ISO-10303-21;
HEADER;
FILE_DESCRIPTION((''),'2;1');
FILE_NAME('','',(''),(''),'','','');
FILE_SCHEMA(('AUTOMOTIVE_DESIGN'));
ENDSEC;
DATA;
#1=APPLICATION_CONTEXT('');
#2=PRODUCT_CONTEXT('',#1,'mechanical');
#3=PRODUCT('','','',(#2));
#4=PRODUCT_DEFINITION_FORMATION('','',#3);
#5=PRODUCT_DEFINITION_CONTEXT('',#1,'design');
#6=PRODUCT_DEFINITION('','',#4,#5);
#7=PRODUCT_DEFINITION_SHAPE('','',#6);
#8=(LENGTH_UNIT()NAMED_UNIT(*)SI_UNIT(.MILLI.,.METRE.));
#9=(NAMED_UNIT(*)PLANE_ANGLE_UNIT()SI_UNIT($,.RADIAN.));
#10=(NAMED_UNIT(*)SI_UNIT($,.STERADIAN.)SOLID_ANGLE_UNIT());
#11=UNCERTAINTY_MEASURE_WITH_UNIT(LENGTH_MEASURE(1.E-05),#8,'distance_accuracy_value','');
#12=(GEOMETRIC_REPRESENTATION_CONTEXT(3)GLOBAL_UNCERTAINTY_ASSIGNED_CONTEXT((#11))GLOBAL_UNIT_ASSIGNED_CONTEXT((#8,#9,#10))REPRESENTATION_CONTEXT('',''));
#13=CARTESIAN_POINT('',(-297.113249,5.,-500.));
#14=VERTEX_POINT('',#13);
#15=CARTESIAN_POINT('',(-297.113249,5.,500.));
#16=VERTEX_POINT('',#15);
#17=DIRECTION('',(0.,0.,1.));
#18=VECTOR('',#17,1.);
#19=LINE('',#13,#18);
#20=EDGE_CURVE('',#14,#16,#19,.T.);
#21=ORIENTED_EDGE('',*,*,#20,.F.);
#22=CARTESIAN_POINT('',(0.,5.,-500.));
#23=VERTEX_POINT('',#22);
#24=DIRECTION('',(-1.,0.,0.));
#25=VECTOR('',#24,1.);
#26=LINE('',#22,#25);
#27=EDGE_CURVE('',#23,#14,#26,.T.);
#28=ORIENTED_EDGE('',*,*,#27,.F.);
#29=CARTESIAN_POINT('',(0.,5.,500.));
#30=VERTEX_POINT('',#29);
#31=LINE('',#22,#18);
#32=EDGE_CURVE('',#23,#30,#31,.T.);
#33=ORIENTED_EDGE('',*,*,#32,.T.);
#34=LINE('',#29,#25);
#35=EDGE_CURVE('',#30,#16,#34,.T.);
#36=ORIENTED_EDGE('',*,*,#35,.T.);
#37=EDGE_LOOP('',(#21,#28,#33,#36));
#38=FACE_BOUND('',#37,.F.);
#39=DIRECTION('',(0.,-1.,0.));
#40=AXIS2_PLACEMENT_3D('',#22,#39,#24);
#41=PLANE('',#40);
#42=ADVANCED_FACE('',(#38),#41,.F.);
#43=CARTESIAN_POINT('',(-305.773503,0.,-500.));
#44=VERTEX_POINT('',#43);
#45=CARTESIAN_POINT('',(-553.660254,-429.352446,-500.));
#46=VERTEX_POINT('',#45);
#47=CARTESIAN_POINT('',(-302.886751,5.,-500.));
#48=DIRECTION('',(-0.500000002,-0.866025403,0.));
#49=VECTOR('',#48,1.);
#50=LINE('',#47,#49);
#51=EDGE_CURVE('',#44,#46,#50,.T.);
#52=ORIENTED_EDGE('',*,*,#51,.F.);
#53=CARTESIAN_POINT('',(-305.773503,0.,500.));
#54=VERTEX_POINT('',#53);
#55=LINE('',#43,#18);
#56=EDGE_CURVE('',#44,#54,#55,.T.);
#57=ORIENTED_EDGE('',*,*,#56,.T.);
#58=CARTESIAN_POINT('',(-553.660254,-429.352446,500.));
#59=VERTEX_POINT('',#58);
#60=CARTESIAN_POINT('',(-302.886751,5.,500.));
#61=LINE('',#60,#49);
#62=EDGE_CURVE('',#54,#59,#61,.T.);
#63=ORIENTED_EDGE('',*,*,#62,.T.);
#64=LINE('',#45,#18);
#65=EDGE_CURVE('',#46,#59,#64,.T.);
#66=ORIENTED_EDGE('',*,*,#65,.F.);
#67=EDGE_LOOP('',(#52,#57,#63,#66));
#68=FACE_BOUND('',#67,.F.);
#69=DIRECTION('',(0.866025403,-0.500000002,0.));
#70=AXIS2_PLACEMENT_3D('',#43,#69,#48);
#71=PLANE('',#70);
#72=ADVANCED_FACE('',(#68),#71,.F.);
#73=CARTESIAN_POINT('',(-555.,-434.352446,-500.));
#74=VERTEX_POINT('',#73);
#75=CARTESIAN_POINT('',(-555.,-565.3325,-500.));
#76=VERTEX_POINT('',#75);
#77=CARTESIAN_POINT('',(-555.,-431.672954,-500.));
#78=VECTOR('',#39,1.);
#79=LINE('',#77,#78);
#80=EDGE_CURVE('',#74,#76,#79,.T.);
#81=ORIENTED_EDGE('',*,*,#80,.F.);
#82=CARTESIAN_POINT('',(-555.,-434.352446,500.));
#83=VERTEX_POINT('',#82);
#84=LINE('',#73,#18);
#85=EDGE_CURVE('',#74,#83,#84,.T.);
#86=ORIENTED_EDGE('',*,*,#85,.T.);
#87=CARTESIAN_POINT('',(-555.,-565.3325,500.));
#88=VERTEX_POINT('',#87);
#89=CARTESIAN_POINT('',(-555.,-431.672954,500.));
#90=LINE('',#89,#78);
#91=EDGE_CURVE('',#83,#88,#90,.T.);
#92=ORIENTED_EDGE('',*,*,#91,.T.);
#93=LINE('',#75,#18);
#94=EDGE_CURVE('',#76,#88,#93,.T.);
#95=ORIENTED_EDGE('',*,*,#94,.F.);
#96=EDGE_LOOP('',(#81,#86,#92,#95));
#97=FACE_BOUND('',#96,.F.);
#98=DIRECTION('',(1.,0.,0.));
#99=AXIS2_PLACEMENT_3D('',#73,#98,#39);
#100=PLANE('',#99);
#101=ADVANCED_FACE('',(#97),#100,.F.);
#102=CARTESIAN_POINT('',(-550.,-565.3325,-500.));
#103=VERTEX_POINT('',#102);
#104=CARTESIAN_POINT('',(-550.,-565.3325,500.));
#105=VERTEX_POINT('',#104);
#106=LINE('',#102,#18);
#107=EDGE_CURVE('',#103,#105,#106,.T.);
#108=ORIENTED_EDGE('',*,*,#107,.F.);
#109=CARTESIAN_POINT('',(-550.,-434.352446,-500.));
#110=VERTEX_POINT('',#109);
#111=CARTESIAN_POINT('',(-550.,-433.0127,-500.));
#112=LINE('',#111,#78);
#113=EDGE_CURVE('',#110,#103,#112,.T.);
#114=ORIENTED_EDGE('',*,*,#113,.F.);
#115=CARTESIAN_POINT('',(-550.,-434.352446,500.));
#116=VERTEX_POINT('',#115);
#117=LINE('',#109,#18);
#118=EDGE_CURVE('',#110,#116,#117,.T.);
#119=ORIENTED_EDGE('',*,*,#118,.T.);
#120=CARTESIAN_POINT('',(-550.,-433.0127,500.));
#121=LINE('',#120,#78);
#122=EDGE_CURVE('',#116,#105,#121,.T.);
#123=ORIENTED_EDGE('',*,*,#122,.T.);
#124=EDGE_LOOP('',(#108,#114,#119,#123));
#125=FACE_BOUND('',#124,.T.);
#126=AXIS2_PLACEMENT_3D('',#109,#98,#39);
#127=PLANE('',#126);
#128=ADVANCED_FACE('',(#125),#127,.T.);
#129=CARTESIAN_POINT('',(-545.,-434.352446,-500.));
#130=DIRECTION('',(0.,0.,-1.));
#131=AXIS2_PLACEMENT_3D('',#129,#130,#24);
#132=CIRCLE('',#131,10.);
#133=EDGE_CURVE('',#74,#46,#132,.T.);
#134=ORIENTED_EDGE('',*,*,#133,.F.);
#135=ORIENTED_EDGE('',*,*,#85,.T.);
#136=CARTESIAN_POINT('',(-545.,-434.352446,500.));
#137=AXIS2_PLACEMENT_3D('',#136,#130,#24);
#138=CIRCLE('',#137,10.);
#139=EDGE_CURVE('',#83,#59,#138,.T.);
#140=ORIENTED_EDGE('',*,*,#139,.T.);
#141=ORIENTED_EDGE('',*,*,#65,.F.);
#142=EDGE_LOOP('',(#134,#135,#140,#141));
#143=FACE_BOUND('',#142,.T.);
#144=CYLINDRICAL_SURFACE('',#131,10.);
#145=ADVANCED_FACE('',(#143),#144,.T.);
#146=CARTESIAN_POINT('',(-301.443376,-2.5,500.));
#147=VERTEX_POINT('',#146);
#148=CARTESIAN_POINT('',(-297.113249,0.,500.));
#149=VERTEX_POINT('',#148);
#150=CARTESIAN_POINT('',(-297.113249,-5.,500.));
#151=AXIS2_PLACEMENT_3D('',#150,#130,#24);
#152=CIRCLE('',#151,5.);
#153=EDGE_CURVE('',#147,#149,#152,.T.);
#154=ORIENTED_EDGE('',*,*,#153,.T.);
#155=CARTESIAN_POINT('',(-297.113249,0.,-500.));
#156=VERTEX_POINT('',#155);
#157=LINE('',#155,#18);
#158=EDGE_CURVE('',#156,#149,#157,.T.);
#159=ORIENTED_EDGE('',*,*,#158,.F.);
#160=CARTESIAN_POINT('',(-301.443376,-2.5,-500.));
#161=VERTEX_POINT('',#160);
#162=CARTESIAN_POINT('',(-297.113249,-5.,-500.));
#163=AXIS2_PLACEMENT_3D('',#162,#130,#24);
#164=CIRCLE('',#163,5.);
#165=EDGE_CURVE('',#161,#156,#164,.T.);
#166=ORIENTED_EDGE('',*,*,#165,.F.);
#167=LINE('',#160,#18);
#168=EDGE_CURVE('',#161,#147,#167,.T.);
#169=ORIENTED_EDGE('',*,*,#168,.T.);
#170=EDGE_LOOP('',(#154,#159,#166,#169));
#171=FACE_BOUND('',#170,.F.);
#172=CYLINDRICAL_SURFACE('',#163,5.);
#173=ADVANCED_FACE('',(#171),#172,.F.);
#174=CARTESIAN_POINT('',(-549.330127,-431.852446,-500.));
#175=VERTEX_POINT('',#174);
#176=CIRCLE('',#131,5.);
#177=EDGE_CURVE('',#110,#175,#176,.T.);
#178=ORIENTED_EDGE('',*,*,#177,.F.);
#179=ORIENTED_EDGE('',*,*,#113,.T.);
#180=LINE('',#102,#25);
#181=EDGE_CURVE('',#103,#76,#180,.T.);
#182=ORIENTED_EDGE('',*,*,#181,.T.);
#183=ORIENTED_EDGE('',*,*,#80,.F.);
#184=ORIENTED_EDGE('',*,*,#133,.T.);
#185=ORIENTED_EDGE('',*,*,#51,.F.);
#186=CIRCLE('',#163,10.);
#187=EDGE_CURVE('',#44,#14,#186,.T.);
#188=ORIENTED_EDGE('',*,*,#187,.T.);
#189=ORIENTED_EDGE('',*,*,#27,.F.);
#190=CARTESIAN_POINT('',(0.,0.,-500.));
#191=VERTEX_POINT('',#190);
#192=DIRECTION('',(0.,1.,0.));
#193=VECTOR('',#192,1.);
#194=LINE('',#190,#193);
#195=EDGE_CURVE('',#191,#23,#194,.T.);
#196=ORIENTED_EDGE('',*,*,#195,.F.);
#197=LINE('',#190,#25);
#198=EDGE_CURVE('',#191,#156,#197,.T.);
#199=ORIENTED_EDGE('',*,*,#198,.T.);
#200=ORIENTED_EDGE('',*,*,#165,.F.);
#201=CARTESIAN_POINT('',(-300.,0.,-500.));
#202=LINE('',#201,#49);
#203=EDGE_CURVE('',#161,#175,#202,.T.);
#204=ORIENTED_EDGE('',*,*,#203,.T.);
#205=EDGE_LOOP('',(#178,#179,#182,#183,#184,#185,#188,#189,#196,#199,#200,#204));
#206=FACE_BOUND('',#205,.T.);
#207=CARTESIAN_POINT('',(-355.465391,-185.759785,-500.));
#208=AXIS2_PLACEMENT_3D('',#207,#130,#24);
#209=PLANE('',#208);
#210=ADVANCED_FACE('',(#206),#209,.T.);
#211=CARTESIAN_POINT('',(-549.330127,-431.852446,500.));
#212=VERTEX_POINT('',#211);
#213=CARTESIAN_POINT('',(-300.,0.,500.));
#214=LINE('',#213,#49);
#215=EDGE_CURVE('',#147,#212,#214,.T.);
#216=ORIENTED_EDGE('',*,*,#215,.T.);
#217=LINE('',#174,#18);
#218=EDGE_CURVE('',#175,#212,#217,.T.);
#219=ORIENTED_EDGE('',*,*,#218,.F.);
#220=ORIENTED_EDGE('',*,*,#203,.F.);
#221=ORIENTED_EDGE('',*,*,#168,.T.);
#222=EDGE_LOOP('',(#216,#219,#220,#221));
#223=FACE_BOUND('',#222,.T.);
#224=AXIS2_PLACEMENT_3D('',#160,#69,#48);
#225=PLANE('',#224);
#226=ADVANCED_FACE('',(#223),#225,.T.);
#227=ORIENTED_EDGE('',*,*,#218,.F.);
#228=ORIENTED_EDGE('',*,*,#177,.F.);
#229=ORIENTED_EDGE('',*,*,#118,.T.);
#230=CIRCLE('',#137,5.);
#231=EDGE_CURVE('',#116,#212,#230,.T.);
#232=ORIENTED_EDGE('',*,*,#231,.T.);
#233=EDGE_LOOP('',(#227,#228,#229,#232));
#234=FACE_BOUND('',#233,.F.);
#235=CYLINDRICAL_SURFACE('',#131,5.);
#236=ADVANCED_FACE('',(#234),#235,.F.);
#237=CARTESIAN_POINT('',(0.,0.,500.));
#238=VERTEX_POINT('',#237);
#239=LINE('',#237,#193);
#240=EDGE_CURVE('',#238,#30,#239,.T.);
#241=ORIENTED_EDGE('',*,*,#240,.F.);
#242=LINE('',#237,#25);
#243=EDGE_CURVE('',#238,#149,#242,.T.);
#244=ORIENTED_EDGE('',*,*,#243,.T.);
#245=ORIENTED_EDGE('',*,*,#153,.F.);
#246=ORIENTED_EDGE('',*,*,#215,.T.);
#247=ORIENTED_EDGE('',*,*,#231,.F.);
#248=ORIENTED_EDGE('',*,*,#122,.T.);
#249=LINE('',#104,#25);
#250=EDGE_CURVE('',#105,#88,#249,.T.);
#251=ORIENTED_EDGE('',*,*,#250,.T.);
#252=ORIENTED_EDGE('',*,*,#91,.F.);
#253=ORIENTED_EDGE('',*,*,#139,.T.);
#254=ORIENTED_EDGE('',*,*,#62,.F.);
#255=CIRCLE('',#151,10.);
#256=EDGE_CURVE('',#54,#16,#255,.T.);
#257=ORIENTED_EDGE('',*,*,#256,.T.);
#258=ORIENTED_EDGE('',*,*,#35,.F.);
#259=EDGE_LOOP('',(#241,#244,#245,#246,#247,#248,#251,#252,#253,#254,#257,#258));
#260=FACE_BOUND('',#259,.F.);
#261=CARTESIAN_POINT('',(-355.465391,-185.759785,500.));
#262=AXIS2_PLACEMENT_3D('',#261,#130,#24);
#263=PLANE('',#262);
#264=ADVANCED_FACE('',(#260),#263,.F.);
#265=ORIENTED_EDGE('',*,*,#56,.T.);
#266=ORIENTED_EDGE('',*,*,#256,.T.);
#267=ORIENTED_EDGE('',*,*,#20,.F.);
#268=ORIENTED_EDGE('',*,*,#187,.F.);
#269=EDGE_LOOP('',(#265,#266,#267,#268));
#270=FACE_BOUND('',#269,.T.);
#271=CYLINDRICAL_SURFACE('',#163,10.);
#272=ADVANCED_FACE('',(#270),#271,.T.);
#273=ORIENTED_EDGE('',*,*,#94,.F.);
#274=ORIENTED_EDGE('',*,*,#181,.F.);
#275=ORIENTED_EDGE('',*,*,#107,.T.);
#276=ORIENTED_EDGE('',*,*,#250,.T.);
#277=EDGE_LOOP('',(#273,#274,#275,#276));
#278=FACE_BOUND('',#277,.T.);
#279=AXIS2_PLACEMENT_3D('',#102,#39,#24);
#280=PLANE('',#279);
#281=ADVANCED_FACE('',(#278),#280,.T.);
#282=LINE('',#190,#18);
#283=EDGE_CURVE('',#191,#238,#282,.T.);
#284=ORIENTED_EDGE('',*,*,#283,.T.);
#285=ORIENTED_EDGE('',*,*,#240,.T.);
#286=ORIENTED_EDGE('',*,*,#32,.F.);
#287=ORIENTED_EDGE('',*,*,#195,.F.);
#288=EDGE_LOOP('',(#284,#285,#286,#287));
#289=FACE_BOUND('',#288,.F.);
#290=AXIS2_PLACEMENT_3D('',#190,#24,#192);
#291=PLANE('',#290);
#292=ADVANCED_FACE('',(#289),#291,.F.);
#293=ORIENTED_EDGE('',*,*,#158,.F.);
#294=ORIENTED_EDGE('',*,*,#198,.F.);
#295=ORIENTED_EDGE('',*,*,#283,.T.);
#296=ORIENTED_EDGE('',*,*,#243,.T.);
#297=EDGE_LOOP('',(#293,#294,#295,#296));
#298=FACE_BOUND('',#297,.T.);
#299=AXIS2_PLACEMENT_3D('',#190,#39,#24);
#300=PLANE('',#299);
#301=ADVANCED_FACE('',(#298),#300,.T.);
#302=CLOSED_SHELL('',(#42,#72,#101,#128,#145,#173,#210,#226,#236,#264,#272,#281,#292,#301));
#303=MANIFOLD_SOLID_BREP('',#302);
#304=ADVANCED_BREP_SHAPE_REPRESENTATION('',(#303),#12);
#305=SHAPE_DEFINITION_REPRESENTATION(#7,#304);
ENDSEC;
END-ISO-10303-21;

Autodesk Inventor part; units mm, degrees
ref_plane "YZ Plane" through (0, 0, 0) normal (1, 0, 0) x (0, 1, 0)
ref_plane "XZ Plane" through (0, 0, 0) normal (0, 1, 0) x (-1, 0, 0)
ref_plane "XY Plane" through (0, 0, 0) normal (0, 0, 1) x (1, 0, 0)
sketch "Sketch1" plane through (0, 0, 0) normal (0, 0, 1) x (1, 0, 0)
  line L0 (0, 0) -> (-300, 0)
  line L1 (-300, 0) -> (-550, -433.0127)
  line L2 (-550, -433.0127) -> (-550, -565.3325)
  dimension "d0" = 300
  dimension "d1" = 500
  dimension "d2" = 120
contour flange "Contour Flange1" sketch "Sketch1" thickness 5 bend radius 5 width 1000 along (0, 0, 1) mid plane yes both sides no wall seen from (-150, 0, 0) lies toward (0, 1, 0) curves L0 L1 L2
bend "Bend1"
corner "Corner1"
equation "\"d3\" = Thickness"
equation "\"d4\" = BendReliefWidth"
equation "\"d5\" = BendReliefDepth"
equation "\"d6\" = MinimumRemnant"
equation "\"d7\" = TransitionRadius"
equation "\"d9\" = BendRadius"
equation "\"d11\" = CornerReliefSize"
equation "\"d12\" = GapSize"
equation "\"d13\" = JacobiRadiusSize"
equation "\"BendRadius\" = Thickness"
equation "\"BendReliefWidth\" = Thickness"
equation "\"BendReliefDepth\" = 0.5 * Thickness"
equation "\"TransitionRadius\" = BendRadius"
equation "\"JacobiRadiusSize\" = BendRadius"
equation "\"GapSize\" = Thickness"
equation "\"Thickness\" = 5"
equation "\"MinimumRemnant\" = 10"
equation "\"CornerReliefSize\" = 20"
properties part number "Part1 example centroid" material "Copper, Wrought"
